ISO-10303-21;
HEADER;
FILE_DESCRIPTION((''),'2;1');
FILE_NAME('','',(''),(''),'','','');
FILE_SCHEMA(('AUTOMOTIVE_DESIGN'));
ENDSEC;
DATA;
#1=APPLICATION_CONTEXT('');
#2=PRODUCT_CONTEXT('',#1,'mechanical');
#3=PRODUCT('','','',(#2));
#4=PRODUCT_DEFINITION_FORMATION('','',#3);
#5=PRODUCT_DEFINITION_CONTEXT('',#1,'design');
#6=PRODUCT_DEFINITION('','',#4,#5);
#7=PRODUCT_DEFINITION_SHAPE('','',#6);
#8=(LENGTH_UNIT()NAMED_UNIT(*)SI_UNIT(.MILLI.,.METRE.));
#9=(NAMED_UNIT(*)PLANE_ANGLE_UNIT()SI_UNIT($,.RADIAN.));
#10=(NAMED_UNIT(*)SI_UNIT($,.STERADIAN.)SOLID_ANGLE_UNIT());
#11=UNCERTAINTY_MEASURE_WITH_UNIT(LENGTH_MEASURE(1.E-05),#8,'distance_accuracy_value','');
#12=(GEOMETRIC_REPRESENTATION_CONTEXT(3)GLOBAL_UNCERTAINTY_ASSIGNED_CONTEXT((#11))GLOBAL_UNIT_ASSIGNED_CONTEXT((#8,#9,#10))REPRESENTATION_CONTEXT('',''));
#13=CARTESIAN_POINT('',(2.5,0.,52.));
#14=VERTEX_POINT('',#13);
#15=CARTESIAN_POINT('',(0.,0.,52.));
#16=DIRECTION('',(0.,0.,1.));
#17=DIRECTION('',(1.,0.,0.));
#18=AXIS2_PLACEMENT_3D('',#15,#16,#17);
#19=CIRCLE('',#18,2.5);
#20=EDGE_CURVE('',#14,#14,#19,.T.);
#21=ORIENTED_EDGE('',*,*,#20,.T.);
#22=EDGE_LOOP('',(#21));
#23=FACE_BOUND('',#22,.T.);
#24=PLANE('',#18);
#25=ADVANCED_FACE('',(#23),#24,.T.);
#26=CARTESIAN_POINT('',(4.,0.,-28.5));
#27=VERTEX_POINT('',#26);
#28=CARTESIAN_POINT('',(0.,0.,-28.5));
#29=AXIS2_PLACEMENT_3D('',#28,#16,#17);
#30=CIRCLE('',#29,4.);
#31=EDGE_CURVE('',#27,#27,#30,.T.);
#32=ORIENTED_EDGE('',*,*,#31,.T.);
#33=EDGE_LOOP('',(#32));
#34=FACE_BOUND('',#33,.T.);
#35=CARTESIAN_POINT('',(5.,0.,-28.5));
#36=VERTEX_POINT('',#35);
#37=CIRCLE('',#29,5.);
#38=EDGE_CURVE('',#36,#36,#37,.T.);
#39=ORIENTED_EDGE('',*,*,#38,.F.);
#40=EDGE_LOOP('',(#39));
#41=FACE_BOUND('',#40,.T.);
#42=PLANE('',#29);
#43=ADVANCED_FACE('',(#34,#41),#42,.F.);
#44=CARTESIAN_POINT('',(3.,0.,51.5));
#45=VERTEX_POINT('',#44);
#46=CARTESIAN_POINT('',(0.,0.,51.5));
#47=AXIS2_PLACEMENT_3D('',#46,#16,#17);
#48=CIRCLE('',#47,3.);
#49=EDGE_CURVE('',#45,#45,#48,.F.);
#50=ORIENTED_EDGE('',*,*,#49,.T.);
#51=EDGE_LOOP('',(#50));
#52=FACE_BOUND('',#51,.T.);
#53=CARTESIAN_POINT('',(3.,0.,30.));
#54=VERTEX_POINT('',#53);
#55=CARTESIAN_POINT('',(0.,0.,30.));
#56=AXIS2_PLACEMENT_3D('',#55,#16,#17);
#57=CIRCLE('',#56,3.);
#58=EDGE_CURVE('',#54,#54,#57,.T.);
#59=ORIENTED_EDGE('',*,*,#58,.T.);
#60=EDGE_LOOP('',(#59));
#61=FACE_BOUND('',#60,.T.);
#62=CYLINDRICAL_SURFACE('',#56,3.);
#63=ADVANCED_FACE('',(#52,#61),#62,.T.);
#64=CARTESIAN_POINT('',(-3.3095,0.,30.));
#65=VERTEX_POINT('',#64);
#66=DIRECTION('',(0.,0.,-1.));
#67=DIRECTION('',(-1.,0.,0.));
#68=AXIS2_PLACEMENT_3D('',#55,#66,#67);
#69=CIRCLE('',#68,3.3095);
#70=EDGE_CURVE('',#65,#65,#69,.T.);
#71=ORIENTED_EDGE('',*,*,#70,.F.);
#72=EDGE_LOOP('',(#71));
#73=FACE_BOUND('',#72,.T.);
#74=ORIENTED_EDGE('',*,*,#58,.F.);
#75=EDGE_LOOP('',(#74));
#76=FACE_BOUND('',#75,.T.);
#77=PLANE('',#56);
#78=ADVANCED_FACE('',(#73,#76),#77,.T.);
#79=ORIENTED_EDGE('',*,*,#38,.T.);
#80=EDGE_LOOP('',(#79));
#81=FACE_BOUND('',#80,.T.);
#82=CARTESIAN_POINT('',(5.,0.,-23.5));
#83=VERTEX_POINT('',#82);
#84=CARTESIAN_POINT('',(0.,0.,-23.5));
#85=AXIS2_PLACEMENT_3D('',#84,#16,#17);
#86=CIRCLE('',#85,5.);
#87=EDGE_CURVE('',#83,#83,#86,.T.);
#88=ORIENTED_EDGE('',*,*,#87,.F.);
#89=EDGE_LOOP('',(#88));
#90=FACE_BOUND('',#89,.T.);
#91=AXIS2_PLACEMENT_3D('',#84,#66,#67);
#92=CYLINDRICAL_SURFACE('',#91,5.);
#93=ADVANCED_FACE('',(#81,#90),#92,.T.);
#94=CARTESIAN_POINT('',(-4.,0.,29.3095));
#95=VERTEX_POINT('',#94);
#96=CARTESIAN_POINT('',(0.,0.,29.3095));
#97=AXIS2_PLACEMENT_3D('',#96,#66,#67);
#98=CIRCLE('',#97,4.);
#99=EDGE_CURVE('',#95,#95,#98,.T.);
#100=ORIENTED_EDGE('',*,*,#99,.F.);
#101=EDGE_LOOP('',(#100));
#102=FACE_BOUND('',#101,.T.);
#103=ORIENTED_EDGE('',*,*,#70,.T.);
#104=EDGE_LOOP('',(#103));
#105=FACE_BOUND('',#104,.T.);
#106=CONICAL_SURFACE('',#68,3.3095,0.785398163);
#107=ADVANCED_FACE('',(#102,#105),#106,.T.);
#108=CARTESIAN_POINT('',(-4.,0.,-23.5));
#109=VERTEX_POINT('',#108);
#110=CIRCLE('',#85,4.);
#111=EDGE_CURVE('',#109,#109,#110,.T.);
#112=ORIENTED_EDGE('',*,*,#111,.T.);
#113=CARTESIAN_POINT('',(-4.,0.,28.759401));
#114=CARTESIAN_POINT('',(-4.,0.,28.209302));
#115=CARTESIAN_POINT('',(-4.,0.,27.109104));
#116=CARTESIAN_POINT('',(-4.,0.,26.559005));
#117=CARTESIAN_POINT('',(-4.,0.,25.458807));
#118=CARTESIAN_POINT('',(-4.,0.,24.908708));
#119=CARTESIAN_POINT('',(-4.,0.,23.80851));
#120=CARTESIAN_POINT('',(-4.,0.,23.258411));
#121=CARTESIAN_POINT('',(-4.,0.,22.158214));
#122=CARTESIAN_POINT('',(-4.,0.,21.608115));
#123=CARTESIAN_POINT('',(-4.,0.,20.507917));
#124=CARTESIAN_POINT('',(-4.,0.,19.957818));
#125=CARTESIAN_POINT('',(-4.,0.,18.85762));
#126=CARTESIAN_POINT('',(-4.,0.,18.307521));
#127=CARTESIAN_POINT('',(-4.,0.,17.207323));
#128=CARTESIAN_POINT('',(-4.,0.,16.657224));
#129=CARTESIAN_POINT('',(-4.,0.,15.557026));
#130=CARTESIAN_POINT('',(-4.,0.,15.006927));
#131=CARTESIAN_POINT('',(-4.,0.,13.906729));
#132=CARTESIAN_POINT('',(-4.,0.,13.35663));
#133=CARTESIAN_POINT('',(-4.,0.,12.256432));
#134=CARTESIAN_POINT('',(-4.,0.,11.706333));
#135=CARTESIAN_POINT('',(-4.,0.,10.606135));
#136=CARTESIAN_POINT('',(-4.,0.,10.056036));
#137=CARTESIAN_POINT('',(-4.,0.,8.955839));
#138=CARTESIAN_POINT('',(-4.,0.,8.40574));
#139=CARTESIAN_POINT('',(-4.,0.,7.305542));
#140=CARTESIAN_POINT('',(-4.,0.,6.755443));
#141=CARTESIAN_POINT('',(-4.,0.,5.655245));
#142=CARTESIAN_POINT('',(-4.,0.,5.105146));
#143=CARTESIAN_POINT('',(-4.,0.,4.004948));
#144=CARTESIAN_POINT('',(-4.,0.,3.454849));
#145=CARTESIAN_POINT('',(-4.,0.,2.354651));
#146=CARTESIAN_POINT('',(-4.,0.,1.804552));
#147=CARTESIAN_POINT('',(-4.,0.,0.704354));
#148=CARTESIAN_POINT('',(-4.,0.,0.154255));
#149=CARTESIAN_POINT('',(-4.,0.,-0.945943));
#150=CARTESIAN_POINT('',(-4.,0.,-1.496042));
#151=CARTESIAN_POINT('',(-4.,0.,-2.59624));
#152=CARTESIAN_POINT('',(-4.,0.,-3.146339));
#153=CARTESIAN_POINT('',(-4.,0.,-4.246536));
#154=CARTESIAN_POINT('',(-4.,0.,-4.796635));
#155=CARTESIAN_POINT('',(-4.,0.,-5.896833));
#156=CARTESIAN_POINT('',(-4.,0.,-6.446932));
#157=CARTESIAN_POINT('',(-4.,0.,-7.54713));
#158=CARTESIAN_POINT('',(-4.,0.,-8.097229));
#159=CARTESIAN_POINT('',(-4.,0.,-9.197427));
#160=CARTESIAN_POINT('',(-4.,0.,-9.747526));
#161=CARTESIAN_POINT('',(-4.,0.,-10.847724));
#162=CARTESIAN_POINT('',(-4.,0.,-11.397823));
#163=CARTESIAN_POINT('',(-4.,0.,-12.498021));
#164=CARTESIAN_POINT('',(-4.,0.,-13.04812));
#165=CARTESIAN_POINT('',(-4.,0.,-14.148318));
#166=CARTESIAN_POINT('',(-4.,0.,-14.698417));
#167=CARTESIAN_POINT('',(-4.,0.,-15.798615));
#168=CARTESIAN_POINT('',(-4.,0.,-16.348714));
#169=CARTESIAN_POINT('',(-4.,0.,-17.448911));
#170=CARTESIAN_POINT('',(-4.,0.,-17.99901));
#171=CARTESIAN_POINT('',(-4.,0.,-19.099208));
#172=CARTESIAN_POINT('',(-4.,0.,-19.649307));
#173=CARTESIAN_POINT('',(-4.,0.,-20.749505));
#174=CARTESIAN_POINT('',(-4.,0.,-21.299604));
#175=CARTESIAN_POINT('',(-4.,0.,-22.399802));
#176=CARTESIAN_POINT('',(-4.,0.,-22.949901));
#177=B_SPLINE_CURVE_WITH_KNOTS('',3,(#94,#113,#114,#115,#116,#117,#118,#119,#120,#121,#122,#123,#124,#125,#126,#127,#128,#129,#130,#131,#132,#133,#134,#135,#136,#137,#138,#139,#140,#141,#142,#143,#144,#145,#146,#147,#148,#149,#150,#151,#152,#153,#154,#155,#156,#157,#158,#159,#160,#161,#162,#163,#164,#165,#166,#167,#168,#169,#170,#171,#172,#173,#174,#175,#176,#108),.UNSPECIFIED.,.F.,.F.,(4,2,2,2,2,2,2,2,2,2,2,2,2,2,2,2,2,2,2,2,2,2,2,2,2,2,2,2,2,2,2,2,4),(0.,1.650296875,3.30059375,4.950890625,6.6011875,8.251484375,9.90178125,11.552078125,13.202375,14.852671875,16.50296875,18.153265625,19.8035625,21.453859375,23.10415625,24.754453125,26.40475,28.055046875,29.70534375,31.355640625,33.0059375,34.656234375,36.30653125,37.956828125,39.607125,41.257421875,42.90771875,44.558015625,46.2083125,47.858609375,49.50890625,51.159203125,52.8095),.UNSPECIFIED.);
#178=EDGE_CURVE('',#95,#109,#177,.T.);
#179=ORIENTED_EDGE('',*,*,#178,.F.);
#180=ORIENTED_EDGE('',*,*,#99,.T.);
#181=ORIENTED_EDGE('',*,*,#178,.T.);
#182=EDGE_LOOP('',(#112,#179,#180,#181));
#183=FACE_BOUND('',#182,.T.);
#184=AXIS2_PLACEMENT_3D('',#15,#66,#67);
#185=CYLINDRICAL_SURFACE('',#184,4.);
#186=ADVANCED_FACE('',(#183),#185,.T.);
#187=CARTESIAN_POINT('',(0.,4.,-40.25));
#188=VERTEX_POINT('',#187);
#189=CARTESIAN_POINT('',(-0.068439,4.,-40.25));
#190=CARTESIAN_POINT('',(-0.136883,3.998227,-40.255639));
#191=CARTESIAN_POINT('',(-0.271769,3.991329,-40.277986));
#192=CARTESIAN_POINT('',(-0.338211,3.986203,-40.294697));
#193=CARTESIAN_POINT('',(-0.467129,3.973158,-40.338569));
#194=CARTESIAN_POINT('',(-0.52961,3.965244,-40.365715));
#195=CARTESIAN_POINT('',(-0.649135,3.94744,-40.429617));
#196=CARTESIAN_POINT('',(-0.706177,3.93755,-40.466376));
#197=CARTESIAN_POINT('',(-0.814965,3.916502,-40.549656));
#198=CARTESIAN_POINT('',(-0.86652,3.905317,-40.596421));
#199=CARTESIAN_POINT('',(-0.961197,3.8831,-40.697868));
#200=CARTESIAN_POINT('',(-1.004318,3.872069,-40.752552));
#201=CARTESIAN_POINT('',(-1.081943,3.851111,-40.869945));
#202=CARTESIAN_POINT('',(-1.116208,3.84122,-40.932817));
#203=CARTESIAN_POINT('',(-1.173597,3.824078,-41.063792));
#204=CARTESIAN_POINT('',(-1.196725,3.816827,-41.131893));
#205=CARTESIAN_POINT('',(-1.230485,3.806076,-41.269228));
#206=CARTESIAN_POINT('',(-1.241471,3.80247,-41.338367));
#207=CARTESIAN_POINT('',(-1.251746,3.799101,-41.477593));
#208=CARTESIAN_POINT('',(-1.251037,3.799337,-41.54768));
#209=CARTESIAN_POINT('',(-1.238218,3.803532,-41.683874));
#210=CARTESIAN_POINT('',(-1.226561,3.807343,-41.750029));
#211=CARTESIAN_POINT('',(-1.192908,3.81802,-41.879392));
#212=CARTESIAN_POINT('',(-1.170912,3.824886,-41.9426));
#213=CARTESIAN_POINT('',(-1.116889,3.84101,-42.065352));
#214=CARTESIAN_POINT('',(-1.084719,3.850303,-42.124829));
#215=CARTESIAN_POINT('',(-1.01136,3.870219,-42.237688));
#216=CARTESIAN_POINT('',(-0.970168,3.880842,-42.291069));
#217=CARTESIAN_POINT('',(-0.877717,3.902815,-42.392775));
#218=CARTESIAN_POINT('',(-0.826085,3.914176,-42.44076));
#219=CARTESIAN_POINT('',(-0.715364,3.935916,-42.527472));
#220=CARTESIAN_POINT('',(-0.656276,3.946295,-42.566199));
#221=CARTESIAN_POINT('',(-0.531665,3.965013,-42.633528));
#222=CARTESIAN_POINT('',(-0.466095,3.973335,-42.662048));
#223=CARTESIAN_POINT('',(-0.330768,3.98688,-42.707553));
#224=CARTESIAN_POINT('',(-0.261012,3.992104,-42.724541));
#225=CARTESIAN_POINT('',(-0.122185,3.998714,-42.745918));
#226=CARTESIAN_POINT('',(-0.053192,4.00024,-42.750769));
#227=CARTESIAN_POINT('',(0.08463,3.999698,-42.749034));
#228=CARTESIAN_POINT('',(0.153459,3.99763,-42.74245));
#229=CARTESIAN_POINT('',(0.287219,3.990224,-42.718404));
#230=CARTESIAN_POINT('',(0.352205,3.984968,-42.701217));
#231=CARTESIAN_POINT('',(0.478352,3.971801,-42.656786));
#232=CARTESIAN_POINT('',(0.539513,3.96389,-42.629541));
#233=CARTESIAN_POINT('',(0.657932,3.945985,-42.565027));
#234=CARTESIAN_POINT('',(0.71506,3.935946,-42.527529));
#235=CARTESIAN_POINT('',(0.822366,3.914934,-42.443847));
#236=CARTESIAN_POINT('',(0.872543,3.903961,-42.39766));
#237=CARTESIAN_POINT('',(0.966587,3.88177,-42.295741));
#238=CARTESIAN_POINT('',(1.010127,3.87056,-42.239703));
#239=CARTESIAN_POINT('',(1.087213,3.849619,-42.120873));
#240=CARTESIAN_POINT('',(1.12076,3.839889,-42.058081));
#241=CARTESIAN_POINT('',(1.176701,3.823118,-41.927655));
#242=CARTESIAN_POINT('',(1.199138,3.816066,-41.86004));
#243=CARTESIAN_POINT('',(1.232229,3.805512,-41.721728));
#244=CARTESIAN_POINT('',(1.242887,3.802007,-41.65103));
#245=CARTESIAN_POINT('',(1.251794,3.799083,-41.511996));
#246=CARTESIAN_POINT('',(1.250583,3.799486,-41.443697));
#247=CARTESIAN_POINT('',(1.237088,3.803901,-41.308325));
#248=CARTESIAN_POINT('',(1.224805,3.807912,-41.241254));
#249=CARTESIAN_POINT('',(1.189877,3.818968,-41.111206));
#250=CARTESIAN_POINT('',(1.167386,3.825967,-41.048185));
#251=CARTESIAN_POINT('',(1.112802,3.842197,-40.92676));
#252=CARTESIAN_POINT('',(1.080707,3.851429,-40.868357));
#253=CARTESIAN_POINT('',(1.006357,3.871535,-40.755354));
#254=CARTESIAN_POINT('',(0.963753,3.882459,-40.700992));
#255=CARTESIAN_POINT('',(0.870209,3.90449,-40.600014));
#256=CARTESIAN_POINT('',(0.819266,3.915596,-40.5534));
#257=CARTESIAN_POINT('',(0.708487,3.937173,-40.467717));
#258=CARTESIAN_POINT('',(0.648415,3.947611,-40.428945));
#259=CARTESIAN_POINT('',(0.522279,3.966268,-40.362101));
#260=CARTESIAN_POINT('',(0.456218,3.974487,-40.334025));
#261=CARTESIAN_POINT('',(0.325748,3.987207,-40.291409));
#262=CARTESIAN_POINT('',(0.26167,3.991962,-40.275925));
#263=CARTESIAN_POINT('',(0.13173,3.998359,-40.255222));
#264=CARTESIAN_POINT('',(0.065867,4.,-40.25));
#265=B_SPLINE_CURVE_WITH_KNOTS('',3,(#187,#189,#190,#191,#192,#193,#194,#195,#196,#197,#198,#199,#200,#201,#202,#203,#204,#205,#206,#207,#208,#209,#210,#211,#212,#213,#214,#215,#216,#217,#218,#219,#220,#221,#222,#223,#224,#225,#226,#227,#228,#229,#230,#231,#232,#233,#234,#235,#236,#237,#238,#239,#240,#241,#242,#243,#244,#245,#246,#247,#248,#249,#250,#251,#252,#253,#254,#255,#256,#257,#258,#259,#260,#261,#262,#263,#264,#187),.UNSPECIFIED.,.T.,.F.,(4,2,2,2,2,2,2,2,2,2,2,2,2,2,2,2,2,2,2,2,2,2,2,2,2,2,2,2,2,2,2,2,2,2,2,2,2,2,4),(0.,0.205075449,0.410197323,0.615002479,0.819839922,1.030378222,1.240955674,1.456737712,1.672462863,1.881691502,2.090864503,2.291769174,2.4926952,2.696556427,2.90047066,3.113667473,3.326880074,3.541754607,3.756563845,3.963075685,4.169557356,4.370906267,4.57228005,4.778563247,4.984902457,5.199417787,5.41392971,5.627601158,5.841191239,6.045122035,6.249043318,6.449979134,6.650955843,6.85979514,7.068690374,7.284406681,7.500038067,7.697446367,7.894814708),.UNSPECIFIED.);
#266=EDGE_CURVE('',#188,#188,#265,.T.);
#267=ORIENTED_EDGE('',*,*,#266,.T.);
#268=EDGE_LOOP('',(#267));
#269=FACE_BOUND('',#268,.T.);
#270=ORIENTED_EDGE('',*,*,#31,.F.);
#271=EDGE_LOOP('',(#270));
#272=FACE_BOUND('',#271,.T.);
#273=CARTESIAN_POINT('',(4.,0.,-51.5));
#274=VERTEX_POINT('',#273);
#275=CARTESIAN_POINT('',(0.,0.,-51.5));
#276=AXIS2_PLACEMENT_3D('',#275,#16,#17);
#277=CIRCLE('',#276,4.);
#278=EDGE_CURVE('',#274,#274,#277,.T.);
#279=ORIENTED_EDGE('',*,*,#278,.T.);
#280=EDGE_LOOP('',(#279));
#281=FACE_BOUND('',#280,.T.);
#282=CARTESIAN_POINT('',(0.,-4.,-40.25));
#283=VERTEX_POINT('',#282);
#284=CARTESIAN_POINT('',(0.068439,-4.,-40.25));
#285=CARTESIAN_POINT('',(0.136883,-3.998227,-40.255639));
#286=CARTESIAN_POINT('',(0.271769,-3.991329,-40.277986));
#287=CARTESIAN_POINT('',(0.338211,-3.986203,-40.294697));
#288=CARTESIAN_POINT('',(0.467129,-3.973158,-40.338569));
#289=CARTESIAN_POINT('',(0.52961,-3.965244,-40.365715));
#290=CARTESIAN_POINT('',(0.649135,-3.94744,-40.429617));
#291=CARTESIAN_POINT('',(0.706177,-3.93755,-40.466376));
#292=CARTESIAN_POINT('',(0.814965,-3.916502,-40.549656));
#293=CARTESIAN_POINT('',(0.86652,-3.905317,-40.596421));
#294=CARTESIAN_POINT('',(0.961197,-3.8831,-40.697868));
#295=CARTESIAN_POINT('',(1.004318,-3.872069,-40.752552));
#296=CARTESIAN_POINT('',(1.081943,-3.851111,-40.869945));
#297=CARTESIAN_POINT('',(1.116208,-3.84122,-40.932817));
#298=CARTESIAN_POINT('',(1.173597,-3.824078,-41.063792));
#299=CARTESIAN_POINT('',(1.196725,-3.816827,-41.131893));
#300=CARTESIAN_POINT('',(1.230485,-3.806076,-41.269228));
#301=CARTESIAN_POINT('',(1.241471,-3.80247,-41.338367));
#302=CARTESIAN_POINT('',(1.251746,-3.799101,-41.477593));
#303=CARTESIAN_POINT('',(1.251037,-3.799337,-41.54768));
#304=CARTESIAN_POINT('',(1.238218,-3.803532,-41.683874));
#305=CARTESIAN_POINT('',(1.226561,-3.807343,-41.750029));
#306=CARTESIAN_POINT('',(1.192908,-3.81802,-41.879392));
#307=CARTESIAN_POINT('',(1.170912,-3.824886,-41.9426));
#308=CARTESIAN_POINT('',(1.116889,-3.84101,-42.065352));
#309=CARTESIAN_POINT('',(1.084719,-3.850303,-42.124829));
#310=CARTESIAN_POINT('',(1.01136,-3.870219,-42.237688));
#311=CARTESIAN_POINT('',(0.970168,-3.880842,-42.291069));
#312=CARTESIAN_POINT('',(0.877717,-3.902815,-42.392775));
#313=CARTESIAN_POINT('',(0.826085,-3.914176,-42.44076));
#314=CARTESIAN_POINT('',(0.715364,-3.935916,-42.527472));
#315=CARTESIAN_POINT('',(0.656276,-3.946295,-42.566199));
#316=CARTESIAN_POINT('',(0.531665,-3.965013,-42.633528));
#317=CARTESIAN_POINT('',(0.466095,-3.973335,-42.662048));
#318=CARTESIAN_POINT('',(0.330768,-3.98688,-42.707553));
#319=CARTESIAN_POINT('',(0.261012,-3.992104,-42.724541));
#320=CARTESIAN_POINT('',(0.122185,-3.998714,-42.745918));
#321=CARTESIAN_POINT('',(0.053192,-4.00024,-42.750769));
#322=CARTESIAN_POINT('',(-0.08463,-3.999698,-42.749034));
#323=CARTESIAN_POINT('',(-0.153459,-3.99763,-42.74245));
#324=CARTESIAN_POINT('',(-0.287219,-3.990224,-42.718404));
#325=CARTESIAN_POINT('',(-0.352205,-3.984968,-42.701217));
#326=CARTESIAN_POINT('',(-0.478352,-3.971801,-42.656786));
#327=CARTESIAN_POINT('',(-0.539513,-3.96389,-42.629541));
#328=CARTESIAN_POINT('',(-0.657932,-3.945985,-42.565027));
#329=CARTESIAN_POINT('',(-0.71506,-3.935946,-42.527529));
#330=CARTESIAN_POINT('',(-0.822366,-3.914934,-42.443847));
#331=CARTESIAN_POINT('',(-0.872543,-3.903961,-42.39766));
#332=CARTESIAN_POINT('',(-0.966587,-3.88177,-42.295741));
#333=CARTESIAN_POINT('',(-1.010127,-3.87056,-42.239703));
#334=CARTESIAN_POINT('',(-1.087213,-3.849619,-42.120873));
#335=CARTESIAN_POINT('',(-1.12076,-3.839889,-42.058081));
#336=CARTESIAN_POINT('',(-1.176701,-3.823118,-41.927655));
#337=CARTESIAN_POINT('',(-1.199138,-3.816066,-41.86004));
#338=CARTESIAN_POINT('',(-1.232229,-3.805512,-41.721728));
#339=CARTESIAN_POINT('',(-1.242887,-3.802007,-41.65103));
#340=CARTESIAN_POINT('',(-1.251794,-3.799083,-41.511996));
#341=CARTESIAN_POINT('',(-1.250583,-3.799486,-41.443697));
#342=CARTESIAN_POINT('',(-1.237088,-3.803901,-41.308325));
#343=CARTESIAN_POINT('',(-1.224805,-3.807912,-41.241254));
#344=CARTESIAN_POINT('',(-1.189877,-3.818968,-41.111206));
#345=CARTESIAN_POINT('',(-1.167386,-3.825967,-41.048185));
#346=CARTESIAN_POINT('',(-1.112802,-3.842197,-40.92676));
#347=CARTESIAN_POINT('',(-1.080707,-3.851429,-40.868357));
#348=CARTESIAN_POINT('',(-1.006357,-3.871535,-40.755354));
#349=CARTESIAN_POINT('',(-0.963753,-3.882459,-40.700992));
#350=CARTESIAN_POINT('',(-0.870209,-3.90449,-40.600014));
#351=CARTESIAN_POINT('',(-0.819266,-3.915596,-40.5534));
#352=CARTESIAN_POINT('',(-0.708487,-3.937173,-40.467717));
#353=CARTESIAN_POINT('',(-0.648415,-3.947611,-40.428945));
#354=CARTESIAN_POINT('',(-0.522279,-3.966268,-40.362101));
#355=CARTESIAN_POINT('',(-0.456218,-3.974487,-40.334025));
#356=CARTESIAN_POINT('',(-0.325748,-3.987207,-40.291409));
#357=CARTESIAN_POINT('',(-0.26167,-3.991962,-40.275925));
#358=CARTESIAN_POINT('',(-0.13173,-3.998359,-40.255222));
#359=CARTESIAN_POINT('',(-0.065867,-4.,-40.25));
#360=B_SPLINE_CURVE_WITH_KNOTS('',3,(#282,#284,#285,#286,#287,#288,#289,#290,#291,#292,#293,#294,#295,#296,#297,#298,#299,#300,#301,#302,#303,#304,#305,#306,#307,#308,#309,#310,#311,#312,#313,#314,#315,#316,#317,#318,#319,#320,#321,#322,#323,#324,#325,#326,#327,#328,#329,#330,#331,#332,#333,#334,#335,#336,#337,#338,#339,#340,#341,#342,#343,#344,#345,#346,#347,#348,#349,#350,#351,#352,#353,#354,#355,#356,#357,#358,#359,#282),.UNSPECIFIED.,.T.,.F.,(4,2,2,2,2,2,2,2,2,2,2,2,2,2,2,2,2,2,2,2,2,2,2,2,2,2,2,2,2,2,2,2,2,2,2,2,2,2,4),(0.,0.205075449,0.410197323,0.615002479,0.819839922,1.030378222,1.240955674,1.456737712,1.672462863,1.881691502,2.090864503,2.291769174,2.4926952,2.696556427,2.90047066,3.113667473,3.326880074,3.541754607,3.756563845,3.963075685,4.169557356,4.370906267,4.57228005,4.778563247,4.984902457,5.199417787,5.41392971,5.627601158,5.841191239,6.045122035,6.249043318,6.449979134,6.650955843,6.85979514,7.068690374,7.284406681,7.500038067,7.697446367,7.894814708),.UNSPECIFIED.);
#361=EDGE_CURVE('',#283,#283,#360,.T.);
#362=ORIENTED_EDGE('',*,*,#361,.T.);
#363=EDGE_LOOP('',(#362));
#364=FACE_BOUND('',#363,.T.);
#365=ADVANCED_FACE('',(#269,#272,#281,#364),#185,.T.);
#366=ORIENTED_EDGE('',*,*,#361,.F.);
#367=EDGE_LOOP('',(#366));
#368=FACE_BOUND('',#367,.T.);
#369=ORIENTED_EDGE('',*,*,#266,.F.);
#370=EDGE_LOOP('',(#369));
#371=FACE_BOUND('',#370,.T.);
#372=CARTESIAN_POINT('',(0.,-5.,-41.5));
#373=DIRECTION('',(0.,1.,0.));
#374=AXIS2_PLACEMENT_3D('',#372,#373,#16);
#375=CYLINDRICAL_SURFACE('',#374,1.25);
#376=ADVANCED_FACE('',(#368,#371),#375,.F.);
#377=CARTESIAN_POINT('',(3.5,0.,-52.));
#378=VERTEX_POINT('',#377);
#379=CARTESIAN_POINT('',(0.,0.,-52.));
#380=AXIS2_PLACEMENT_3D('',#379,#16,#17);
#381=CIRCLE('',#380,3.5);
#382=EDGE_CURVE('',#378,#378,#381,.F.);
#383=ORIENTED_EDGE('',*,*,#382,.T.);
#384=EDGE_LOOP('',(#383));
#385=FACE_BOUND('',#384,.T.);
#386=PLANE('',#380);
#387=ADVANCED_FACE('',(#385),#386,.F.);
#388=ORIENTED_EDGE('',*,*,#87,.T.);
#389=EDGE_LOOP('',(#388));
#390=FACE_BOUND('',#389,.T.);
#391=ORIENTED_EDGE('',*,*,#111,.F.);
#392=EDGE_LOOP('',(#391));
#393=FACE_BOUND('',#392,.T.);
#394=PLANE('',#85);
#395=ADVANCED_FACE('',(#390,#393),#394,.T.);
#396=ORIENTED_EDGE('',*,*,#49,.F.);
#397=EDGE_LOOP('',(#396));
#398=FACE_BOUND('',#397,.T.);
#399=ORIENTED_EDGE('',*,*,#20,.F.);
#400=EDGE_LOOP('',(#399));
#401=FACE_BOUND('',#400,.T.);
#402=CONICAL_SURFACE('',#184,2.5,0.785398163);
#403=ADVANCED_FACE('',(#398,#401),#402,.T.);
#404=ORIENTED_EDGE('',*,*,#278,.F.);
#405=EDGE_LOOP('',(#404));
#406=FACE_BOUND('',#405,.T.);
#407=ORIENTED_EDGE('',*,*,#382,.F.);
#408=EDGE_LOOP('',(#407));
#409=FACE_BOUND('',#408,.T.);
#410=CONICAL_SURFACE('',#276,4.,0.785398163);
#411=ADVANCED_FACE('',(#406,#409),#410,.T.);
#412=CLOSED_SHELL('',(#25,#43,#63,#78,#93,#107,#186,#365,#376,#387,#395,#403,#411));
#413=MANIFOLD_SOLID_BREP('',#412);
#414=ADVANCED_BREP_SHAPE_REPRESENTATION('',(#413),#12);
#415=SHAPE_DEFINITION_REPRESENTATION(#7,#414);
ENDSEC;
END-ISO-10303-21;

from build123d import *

# Parameters (mm, degrees)
CROQUIS1_R              = 4
SALIENTE_EXTRUIR1_DEPTH = 52
CROQUIS2_R              = 5
SALIENTE_EXTRUIR2_DEPTH = 5
CROQUIS3_R              = 4
CROQUIS3_R_2            = 3
CORTAR_EXTRUIR1_DEPTH   = 22
CROQUIS5_R              = 1.25
CORTAR_EXTRUIR2_DEPTH   = 54.009433123
CHAFL_N1_SIZE           = 0.5


# Read off the part's stored shape, not the designer's step: M8 Roscas Standard Taladro1
with BuildPart() as part:
    # Croquis1 → Saliente-Extruir1 (new, symmetric)
    with BuildSketch(Plane.XY):
        with Locations(Location((0, 0, 0), (0, 0, 180))):
            Circle(CROQUIS1_R)
    extrude(amount=SALIENTE_EXTRUIR1_DEPTH, both=True)

    # Croquis2 → Saliente-Extruir2 (add)
    with BuildSketch(Plane.XY.offset(-28.5)):
        Circle(CROQUIS2_R)
    extrude(amount=SALIENTE_EXTRUIR2_DEPTH)

    # Croquis3 → Cortar-Extruir1 (cut)
    with BuildSketch(Plane.XY.offset(52)):
        with Locations(Location((0, 0, 0), (0, 0, 180))):
            Circle(CROQUIS3_R)
        Circle(CROQUIS3_R_2, mode=Mode.SUBTRACT)
    extrude(amount=-CORTAR_EXTRUIR1_DEPTH, mode=Mode.SUBTRACT)

    # M8 Roscas Standard Taladro1 outline → M8 Roscas Standard Taladro1 (revolve, cut)
    with BuildSketch(Plane.XZ):
        Polygon((4, 30), (3.3095, 30), (4, 29.3095), align=None)
    revolve(axis=Axis((0, 0, 0), (0, 0, 1)), mode=Mode.SUBTRACT)

    # Croquis5 → Cortar-Extruir2 (cut, through all)
    with BuildSketch(Plane(origin=(0, 4, 0), x_dir=(1, 0, 0), z_dir=(0, 1, 0))):
        with Locations(Location((0, 41.5, 0), (0, 0, 270))):
            Circle(CROQUIS5_R)
    extrude(amount=-CORTAR_EXTRUIR2_DEPTH, mode=Mode.SUBTRACT)

    # Chaflán1
    chafl_n1_edges = [part.edges().sort_by_distance(p)[0] for p in [
        (-3, 0, 52),
        (4, 0, -52),
    ]]
    chamfer(chafl_n1_edges, length=CHAFL_N1_SIZE)


solid = part.part
